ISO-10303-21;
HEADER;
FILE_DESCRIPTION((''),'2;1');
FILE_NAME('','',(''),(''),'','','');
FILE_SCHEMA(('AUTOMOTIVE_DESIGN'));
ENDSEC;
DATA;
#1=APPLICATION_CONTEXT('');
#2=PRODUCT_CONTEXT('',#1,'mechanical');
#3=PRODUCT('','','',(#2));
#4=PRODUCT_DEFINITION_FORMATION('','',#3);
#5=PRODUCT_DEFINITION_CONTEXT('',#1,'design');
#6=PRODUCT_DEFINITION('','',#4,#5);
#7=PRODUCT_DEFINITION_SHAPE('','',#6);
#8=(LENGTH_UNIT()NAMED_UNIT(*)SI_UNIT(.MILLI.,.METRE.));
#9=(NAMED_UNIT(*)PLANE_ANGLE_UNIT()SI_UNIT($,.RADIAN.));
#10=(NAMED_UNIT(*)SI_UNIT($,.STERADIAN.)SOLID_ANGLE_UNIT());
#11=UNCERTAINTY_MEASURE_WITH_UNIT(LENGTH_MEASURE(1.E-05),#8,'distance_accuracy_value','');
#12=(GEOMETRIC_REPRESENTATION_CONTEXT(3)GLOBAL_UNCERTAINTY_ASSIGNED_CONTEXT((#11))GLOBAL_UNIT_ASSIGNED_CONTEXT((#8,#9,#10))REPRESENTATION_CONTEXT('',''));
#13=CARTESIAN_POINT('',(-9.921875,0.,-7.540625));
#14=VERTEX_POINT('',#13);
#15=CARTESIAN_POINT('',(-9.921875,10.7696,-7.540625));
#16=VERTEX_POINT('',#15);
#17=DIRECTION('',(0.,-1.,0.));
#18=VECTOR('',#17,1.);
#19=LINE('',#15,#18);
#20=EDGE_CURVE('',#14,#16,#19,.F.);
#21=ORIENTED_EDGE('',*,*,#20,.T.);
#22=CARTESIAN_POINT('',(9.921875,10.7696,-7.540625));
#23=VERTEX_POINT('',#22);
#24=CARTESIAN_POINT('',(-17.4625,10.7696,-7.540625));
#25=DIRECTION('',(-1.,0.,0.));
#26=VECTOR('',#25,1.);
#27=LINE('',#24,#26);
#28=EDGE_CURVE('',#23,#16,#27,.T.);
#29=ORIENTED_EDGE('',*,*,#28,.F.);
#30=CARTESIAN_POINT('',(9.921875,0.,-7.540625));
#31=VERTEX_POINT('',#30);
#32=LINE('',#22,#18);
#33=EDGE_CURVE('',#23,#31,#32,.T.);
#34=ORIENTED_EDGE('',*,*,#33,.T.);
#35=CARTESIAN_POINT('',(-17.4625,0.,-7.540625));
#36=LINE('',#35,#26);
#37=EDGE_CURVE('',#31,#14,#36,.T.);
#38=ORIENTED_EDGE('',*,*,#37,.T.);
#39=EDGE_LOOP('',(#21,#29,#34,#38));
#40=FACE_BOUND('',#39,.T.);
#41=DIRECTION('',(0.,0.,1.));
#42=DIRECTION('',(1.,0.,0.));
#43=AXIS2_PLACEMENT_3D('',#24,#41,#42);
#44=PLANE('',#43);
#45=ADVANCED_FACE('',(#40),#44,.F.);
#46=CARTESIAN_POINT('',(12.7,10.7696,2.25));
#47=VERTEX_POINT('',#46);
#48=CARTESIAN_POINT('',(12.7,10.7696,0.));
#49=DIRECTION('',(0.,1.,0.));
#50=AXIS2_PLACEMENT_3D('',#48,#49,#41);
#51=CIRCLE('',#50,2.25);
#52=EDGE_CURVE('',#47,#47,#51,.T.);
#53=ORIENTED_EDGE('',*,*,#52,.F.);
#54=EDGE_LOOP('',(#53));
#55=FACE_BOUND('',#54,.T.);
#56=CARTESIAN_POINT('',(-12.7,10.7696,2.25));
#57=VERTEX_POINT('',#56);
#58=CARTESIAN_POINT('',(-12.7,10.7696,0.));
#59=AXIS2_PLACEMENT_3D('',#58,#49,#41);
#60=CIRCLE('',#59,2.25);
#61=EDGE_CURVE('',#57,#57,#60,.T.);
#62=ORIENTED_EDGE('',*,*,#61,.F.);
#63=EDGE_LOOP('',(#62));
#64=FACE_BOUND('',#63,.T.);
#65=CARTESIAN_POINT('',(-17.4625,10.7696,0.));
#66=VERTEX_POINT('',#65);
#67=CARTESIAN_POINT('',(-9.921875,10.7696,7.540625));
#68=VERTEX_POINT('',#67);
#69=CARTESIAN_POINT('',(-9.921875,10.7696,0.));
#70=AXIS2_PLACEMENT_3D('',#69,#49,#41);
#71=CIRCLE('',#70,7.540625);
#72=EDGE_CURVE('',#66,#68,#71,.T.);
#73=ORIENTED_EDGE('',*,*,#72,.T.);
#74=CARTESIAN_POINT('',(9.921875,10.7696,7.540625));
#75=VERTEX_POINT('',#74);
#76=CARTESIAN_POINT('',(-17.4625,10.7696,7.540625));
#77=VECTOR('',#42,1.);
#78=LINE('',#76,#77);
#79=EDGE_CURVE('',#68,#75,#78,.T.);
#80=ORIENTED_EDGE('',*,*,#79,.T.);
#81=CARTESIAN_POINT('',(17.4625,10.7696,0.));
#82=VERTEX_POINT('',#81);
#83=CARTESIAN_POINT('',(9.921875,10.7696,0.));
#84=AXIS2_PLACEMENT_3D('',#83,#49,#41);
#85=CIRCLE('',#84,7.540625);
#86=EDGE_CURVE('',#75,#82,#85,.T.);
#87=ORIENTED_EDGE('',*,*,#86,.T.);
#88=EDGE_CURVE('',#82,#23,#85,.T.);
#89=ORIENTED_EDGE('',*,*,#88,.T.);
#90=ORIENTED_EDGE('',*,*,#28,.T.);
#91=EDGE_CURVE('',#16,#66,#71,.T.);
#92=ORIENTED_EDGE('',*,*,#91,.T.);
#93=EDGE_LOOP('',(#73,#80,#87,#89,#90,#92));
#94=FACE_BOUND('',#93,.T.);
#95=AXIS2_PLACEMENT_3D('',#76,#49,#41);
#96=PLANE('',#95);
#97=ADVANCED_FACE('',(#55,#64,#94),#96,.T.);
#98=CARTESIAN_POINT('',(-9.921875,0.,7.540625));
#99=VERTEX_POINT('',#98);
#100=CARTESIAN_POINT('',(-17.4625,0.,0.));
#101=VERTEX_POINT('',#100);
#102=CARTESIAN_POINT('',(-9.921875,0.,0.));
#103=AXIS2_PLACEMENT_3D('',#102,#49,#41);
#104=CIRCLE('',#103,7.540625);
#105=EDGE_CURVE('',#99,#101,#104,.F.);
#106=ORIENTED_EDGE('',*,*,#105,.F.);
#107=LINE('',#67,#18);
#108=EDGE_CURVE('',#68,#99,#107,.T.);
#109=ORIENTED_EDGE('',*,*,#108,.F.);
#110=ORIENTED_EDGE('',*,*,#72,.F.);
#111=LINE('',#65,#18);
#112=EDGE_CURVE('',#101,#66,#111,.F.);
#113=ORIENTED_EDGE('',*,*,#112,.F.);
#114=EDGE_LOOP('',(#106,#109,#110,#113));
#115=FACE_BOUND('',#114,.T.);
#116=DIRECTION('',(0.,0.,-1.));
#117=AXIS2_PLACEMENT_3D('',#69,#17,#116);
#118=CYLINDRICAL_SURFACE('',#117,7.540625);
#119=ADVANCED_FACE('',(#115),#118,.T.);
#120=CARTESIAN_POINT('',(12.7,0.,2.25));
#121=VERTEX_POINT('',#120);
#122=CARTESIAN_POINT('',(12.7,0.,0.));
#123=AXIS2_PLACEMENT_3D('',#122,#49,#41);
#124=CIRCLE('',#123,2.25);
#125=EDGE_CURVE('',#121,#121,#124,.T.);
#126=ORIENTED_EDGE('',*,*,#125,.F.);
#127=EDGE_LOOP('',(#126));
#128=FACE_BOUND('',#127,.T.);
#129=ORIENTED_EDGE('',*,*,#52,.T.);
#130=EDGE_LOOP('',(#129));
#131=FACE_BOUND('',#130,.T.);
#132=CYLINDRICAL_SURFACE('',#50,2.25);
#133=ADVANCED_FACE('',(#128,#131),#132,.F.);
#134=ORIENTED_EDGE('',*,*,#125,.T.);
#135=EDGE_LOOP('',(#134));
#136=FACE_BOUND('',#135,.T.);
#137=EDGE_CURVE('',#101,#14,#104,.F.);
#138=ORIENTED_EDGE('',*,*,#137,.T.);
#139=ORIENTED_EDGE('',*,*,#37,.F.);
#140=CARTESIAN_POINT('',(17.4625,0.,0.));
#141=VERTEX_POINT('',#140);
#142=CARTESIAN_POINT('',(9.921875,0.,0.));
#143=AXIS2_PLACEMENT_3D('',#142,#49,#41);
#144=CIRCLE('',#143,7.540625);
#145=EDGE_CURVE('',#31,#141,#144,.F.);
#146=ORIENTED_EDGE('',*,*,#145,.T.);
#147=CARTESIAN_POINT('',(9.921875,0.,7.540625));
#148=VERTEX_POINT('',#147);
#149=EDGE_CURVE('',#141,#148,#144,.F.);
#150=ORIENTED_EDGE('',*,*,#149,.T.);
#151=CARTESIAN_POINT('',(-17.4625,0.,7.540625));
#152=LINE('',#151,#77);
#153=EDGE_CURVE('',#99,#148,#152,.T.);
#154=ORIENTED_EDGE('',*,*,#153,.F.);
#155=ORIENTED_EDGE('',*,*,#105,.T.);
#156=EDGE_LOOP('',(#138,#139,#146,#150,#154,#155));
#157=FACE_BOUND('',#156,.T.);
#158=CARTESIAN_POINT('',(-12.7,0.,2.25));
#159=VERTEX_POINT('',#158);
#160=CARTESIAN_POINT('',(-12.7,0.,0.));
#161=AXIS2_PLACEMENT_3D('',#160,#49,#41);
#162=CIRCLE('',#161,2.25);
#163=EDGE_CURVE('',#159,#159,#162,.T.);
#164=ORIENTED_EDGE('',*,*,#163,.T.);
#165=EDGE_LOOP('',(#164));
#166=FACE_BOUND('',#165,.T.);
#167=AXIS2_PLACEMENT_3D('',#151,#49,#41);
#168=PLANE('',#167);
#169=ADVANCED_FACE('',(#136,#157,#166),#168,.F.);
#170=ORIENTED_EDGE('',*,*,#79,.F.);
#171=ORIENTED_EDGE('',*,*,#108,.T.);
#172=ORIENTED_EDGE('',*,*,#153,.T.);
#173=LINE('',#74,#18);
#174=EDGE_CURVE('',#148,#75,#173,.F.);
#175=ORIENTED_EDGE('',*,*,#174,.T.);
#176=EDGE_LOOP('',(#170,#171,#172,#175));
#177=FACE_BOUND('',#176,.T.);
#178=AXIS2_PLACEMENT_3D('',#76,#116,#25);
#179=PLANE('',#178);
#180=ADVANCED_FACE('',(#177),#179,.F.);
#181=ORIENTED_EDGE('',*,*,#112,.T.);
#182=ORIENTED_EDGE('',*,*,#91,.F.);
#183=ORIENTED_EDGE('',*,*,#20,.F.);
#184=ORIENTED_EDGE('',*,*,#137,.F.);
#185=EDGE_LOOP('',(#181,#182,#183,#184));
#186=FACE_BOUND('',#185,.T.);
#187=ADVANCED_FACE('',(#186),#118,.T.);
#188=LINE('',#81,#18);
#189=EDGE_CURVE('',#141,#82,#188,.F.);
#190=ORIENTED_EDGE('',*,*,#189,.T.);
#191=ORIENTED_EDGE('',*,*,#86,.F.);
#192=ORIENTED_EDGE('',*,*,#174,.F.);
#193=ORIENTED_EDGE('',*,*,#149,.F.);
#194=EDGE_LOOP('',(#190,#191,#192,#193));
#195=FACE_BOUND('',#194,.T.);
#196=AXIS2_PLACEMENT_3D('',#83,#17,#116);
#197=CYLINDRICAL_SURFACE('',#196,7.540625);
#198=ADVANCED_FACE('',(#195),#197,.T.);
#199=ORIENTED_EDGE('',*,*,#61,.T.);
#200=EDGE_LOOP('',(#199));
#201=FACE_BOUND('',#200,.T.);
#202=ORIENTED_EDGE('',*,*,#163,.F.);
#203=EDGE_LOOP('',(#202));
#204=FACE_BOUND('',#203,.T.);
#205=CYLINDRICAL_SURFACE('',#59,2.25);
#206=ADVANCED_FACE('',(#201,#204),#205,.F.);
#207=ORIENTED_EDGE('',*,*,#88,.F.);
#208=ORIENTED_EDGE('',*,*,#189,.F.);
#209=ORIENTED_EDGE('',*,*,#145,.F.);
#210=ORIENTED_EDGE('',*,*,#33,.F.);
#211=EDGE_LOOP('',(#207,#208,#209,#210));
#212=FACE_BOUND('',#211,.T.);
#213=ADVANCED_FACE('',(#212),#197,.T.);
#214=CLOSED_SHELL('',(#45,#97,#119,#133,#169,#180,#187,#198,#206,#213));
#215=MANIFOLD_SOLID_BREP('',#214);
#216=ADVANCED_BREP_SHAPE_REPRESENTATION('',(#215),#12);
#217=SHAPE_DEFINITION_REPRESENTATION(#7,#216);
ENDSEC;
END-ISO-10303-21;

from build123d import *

# Parameters (mm, degrees)
SKETCH1_W            = 34.925
SKETCH1_H            = 15.08125
EXTRUDE1_DEPTH       = 10.7696
M4_CLEARANCE_HOLE1_D = 4.5
FILLET1_R            = 7.540625


with BuildPart() as part:
    # Sketch1 → Extrude1 (new body)
    with BuildSketch(Plane(origin=(0, 0, 0), x_dir=(1, 0, 0), z_dir=(0, 1, 0))):
        Rectangle(SKETCH1_W, SKETCH1_H)
    extrude(amount=EXTRUDE1_DEPTH)

    # M4 Clearance Hole1 (through all)
    with Locations(Plane(origin=(0, 10.7696, 0), x_dir=(-1, 0, 0), z_dir=(0, 1, 0))):
        with Locations((12.7, 0), (-12.7, 0)):
            Hole(M4_CLEARANCE_HOLE1_D / 2)

    # Fillet1
    fillet1_edges = [part.edges().sort_by_distance(p)[0] for p in [
        (17.4625, 5.3848, 7.540625),
        (17.4625, 5.3848, -7.540625),
        (-17.4625, 5.3848, -7.540625),
        (-17.4625, 5.3848, 7.540625),
    ]]
    fillet(fillet1_edges, radius=FILLET1_R - 0.0001)  # a hair under: the kernel refuses the full size


solid = part.part
